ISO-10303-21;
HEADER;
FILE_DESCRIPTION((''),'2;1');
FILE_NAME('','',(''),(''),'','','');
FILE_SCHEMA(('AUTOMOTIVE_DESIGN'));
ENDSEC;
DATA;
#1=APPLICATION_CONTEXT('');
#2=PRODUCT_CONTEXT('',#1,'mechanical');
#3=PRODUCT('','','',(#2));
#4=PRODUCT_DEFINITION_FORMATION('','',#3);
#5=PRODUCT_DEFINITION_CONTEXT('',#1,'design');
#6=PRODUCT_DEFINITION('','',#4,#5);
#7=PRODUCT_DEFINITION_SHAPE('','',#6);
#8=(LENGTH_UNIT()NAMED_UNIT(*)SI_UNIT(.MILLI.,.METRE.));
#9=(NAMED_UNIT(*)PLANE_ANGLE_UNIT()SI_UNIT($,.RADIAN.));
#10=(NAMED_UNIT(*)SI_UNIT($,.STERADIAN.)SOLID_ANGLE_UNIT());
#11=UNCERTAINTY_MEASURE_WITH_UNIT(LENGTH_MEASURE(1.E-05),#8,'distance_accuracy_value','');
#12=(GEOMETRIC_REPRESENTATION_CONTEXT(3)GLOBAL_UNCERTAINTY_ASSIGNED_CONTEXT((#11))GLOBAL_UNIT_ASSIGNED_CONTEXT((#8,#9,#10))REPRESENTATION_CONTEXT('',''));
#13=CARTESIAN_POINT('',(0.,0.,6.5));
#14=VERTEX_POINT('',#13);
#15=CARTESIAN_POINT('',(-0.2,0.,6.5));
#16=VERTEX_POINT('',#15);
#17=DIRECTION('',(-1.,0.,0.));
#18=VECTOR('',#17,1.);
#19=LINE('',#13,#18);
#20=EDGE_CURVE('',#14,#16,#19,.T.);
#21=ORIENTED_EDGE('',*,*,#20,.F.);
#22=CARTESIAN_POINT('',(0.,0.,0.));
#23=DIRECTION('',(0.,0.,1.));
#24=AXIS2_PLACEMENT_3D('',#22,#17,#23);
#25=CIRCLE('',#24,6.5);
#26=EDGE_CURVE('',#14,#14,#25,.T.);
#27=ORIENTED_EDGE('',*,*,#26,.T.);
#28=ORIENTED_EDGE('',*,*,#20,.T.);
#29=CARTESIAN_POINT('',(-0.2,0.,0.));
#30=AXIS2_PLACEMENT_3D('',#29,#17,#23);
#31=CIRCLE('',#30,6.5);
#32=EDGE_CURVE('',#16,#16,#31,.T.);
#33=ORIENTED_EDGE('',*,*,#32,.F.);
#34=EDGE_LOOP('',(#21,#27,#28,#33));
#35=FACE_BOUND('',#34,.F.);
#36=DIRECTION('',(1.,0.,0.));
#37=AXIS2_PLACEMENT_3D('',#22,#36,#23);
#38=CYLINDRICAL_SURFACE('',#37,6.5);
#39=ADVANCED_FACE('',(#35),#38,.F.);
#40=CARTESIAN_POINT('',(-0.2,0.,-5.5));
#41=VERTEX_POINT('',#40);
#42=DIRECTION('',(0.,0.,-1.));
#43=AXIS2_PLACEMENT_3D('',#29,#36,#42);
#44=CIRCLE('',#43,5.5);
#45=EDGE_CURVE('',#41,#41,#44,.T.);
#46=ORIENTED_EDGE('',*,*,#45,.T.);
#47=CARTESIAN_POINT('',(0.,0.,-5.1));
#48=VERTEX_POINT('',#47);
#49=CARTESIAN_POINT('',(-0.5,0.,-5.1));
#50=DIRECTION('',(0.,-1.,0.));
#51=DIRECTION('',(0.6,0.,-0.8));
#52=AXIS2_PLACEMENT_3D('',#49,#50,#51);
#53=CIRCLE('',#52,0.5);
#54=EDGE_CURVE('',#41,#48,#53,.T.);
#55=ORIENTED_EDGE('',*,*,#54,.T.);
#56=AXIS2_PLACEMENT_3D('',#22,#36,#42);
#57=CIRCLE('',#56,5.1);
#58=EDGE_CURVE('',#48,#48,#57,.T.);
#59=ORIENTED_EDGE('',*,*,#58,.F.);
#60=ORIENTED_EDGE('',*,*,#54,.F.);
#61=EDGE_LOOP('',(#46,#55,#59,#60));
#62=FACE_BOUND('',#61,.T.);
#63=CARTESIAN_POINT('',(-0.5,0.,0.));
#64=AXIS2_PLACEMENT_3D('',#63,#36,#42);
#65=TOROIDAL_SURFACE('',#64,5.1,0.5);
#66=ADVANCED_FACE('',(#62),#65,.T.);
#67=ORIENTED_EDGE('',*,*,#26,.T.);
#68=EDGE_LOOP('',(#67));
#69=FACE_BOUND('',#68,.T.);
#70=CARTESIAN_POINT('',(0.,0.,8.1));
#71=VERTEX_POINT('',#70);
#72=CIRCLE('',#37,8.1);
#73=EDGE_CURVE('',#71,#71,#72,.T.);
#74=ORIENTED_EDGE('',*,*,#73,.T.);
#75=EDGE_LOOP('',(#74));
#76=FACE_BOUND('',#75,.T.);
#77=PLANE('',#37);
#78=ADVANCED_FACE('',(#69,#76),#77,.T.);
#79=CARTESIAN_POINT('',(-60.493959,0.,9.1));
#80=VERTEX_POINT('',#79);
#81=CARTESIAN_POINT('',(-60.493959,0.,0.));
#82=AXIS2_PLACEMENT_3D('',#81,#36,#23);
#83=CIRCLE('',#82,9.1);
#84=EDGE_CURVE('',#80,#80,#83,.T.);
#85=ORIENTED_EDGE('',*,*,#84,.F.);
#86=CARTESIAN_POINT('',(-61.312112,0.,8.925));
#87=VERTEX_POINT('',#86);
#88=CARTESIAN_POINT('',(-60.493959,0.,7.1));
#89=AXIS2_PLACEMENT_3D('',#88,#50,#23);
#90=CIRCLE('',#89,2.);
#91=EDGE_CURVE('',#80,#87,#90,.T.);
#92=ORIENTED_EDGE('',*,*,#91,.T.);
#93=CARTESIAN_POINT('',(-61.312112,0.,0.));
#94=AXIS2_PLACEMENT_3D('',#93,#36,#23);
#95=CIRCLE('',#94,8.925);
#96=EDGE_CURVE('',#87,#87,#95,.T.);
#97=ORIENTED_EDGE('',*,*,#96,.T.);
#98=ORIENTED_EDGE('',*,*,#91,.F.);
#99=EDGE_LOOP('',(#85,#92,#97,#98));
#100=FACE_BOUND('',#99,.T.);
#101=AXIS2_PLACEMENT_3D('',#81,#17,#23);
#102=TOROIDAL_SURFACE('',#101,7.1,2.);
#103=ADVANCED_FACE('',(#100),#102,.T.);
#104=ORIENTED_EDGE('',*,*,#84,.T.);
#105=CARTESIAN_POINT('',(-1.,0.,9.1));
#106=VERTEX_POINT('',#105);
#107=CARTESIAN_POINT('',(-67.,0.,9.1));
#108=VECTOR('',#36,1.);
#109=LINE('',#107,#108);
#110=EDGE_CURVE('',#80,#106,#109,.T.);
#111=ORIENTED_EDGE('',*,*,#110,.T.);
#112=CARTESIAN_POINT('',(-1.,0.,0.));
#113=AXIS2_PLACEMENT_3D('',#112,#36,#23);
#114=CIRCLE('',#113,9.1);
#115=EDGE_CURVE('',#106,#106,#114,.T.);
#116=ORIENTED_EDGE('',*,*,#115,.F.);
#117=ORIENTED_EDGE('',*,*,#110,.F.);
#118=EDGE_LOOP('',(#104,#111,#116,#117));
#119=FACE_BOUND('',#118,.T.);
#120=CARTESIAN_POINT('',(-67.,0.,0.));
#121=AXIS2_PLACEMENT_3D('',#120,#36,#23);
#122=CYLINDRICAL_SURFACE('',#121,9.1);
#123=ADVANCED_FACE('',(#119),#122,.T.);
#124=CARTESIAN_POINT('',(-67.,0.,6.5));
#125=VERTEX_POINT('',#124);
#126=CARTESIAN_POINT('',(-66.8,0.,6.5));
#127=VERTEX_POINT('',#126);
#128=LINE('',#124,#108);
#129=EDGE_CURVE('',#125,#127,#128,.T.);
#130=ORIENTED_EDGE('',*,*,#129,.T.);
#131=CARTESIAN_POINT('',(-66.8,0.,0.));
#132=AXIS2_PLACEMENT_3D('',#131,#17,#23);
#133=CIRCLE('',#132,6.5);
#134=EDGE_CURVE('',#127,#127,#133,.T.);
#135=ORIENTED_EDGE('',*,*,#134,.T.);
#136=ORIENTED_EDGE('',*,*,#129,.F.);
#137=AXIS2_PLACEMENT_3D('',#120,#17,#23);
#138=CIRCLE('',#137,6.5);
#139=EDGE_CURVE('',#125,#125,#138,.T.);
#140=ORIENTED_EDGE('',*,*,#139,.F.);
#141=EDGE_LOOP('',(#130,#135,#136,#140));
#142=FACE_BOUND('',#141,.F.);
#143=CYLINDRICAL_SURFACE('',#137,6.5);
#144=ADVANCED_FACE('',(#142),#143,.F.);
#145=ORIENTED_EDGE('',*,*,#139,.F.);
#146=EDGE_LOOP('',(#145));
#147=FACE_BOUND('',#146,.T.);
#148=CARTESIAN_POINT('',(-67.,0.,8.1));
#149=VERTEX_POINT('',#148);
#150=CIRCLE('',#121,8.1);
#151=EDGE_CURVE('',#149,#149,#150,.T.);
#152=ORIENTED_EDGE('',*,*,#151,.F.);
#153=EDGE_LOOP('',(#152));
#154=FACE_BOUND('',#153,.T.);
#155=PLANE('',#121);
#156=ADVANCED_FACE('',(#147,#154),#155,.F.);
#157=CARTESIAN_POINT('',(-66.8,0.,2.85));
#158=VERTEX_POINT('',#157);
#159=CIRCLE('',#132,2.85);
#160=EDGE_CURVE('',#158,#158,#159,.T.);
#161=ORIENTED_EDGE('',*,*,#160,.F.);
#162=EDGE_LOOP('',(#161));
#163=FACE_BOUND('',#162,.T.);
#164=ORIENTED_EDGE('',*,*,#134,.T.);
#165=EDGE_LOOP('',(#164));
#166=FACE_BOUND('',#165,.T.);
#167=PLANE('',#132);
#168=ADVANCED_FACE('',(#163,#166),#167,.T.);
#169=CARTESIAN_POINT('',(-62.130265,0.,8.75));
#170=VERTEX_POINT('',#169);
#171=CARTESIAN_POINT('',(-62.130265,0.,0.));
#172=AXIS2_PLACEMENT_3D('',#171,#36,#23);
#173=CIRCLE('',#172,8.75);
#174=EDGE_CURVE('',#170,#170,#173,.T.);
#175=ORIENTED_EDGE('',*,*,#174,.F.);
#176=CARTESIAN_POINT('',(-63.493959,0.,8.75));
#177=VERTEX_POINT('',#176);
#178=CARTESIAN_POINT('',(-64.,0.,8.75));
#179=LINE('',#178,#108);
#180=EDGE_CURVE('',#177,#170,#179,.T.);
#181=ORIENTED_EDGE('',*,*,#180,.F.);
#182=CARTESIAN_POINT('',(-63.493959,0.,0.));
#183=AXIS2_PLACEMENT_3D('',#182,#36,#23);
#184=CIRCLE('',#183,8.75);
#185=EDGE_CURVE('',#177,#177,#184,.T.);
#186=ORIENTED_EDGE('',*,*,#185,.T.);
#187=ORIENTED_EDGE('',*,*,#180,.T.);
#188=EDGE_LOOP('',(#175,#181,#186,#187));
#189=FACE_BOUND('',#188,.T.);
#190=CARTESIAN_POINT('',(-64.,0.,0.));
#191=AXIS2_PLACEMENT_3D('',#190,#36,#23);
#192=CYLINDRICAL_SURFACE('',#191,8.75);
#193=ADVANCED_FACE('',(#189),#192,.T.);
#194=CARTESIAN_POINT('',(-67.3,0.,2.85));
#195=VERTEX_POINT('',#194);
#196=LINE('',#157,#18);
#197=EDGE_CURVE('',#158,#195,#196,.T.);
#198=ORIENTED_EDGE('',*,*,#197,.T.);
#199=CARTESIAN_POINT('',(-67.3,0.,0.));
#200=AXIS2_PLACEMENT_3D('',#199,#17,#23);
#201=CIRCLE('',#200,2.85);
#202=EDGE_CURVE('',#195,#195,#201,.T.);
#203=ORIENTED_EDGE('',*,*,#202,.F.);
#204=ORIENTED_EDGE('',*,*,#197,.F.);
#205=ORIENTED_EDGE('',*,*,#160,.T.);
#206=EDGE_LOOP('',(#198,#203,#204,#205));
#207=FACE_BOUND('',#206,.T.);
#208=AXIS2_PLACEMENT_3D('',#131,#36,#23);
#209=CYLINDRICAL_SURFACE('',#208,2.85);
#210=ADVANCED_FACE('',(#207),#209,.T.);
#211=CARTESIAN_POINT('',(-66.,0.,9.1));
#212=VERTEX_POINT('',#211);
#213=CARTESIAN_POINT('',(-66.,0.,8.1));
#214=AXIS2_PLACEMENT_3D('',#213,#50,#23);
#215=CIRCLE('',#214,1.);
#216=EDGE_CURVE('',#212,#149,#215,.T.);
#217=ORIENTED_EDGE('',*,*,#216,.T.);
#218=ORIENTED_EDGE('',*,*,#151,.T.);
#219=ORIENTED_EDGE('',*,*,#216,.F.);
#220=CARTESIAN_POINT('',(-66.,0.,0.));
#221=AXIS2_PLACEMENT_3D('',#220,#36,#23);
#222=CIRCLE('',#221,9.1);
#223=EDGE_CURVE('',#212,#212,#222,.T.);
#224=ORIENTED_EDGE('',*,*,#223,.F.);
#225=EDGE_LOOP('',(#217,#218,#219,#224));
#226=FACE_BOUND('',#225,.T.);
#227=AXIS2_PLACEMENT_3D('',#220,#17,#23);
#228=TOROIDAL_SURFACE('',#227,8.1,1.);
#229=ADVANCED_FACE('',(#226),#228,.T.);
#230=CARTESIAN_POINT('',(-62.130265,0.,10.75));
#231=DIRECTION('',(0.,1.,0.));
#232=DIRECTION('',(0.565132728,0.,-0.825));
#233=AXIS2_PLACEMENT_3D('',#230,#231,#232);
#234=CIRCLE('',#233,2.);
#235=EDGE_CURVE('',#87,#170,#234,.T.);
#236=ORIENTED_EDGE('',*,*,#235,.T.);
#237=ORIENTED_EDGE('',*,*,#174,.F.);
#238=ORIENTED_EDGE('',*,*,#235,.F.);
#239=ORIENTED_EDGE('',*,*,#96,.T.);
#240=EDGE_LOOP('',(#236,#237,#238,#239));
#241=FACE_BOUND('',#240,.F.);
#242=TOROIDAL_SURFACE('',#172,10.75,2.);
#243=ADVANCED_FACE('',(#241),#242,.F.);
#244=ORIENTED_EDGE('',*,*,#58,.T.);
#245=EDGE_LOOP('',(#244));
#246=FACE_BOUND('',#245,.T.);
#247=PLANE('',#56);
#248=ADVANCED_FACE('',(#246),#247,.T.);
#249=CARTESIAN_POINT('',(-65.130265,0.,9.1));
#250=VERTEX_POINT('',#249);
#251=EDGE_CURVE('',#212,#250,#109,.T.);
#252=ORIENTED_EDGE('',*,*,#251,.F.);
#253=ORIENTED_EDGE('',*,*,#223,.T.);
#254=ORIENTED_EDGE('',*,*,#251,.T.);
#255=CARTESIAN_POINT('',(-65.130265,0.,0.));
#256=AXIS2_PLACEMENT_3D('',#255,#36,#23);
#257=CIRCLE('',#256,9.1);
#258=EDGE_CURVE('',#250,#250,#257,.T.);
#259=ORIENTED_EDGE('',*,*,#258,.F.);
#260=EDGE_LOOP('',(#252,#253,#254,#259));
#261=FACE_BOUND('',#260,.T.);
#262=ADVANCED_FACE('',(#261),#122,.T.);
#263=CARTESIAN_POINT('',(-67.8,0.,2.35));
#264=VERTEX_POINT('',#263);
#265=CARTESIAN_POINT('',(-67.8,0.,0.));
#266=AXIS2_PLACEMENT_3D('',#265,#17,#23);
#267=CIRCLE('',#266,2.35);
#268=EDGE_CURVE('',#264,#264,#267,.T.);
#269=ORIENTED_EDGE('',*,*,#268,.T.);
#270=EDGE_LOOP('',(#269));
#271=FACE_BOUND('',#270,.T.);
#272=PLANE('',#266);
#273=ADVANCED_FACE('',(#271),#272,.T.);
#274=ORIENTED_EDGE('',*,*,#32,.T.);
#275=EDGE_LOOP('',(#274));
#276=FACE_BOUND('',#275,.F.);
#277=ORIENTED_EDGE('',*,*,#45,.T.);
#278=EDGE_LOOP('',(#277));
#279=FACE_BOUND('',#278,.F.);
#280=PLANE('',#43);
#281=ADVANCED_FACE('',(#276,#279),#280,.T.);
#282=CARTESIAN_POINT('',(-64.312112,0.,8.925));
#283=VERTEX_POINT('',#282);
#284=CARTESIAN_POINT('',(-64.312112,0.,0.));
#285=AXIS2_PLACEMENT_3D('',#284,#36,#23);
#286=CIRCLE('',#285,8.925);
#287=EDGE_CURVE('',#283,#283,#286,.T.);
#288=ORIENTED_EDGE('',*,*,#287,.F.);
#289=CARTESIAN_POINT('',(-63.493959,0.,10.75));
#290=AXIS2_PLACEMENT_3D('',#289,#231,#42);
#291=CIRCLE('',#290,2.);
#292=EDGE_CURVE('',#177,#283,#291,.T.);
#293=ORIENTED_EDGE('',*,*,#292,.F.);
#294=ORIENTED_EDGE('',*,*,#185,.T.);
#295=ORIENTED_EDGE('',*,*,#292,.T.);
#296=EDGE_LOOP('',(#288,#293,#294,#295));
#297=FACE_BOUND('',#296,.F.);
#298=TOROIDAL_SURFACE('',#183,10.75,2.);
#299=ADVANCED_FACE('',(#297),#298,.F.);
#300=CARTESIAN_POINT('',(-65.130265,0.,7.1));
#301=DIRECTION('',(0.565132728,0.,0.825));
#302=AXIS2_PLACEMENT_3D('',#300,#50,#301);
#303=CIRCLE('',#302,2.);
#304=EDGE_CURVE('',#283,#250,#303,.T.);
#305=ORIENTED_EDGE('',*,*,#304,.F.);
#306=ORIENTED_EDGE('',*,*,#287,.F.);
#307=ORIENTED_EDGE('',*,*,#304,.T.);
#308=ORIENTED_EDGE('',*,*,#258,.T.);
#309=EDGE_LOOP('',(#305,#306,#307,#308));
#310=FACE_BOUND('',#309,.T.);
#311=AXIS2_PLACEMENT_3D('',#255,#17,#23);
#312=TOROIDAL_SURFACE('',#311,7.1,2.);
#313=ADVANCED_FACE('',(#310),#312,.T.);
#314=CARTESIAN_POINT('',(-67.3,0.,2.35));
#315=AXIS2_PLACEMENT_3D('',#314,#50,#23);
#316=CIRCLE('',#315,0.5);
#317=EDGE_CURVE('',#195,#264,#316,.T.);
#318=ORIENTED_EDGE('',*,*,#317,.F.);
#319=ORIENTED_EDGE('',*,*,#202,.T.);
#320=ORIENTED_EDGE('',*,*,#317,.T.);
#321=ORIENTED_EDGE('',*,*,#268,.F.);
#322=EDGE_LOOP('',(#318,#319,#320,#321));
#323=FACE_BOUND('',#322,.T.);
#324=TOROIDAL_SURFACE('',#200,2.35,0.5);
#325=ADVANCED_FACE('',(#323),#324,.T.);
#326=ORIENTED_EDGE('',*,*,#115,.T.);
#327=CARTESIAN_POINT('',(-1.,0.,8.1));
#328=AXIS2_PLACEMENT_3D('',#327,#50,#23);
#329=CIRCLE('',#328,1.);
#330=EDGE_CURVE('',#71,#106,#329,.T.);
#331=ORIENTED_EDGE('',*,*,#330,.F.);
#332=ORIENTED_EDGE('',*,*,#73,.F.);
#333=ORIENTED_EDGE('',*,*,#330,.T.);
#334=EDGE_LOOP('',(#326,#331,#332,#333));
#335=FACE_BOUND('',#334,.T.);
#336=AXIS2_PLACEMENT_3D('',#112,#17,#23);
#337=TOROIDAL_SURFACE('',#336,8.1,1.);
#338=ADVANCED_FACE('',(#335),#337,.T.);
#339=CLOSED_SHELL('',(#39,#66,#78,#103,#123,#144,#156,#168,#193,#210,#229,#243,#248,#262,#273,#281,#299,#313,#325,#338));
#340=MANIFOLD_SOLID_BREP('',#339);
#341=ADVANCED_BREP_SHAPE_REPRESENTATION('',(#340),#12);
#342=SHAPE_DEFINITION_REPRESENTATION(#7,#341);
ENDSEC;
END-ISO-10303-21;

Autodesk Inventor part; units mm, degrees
ref_plane "YZ Plane" through (0, 0, 0) normal (1, 0, 0) x (0, 1, 0)
ref_plane "XZ Plane" through (0, 0, 0) normal (0, 1, 0) x (-1, 0, 0)
sketch "Skizze1" plane through (0, 0, 0) normal (0, 1, 0) x (-1, 0, 0)
  line L0 (0, 0) -> (67, 0)
  line L1 (67, 0) -> (67, 9.1)
  line L2 (67, 9.1) -> (0, 9.1)
  line L3 (0, 9.1) -> (0, 0)
  line L4 (61, 9.1) -> (64, 9.1)
  line L5 (64, 9.1) -> (64, 8.75)
  line L6 (64, 8.75) -> (61, 8.75)
  line L7 (61, 8.75) -> (61, 9.1)
  line L8 (80.4, 0) -> (-13.4, 0) projected
  dimension "d0" = 67
  dimension "d1" = 9.1
  dimension "d2" = 3
  dimension "d3" = 3
  dimension "d4" = 0.35
revolve "Umdrehung1" add sketch "Skizze1" angle 360 about axis through (-10, 0, 0) along (1, 0, 0) contours L3 L2 L7 L6 L5 L1 L0
ref_plane "Arbeitsebene1" through (-33.5, 0, 0) normal (-1, 0, 0) x (0, 0, 1)
fillet "Rundung1" radius 2 4 edges at (-64, 0, -9.1) (-64, 0, -8.75) (-61, 0, -8.75) (-61, 0, -9.1)
fillet "Rundung2" radius 1 2 edges at (-67, 0, -9.1) (0, 0, -9.1)
sketch "Skizze2" plane through (-67, 0, 0) normal (-1, 0, 0) x (0, 0, 1)
  circle A0 centre (0, 0) radius 8.1 projected
  circle A1 centre (0, 0) radius 6.5
  dimension "d8" = 13
extrude "Extrusion1" cut sketch "Skizze2" against normal blind 0.2 contours A1
mirror "Spiegeln1" about plane through (-33.5, 0, 0) normal (-1, 0, 0) of "Extrusion1"
sketch "Skizze3" plane through (-66.8, 0, 0) normal (-1, 0, 0) x (0, 0, 1)
  circle A0 centre (0, 0) radius 6.5 projected
  circle A1 centre (0, 0) radius 2.85
  dimension "d11" = 5.7
extrude "Extrusion2" add sketch "Skizze3" along normal blind 1 contours A1
fillet "Rundung3" radius 0.5 1 edges at (-67.8, 0, -2.85)
sketch "Skizze4" plane through (-0.2, 0, 0) normal (1, 0, 0) x (0, 0, -1)
  circle A0 centre (0, 0) radius 6.5 projected
  circle A1 centre (0, 0) radius 5.5
  dimension "d15" = 1
extrude "Extrusion3" add sketch "Skizze4" along normal blind 0.2 contours A1
fillet "Rundung4" radius 0.5 1 edges at (0, 0, 5.5)
properties part number "accu_18500"
